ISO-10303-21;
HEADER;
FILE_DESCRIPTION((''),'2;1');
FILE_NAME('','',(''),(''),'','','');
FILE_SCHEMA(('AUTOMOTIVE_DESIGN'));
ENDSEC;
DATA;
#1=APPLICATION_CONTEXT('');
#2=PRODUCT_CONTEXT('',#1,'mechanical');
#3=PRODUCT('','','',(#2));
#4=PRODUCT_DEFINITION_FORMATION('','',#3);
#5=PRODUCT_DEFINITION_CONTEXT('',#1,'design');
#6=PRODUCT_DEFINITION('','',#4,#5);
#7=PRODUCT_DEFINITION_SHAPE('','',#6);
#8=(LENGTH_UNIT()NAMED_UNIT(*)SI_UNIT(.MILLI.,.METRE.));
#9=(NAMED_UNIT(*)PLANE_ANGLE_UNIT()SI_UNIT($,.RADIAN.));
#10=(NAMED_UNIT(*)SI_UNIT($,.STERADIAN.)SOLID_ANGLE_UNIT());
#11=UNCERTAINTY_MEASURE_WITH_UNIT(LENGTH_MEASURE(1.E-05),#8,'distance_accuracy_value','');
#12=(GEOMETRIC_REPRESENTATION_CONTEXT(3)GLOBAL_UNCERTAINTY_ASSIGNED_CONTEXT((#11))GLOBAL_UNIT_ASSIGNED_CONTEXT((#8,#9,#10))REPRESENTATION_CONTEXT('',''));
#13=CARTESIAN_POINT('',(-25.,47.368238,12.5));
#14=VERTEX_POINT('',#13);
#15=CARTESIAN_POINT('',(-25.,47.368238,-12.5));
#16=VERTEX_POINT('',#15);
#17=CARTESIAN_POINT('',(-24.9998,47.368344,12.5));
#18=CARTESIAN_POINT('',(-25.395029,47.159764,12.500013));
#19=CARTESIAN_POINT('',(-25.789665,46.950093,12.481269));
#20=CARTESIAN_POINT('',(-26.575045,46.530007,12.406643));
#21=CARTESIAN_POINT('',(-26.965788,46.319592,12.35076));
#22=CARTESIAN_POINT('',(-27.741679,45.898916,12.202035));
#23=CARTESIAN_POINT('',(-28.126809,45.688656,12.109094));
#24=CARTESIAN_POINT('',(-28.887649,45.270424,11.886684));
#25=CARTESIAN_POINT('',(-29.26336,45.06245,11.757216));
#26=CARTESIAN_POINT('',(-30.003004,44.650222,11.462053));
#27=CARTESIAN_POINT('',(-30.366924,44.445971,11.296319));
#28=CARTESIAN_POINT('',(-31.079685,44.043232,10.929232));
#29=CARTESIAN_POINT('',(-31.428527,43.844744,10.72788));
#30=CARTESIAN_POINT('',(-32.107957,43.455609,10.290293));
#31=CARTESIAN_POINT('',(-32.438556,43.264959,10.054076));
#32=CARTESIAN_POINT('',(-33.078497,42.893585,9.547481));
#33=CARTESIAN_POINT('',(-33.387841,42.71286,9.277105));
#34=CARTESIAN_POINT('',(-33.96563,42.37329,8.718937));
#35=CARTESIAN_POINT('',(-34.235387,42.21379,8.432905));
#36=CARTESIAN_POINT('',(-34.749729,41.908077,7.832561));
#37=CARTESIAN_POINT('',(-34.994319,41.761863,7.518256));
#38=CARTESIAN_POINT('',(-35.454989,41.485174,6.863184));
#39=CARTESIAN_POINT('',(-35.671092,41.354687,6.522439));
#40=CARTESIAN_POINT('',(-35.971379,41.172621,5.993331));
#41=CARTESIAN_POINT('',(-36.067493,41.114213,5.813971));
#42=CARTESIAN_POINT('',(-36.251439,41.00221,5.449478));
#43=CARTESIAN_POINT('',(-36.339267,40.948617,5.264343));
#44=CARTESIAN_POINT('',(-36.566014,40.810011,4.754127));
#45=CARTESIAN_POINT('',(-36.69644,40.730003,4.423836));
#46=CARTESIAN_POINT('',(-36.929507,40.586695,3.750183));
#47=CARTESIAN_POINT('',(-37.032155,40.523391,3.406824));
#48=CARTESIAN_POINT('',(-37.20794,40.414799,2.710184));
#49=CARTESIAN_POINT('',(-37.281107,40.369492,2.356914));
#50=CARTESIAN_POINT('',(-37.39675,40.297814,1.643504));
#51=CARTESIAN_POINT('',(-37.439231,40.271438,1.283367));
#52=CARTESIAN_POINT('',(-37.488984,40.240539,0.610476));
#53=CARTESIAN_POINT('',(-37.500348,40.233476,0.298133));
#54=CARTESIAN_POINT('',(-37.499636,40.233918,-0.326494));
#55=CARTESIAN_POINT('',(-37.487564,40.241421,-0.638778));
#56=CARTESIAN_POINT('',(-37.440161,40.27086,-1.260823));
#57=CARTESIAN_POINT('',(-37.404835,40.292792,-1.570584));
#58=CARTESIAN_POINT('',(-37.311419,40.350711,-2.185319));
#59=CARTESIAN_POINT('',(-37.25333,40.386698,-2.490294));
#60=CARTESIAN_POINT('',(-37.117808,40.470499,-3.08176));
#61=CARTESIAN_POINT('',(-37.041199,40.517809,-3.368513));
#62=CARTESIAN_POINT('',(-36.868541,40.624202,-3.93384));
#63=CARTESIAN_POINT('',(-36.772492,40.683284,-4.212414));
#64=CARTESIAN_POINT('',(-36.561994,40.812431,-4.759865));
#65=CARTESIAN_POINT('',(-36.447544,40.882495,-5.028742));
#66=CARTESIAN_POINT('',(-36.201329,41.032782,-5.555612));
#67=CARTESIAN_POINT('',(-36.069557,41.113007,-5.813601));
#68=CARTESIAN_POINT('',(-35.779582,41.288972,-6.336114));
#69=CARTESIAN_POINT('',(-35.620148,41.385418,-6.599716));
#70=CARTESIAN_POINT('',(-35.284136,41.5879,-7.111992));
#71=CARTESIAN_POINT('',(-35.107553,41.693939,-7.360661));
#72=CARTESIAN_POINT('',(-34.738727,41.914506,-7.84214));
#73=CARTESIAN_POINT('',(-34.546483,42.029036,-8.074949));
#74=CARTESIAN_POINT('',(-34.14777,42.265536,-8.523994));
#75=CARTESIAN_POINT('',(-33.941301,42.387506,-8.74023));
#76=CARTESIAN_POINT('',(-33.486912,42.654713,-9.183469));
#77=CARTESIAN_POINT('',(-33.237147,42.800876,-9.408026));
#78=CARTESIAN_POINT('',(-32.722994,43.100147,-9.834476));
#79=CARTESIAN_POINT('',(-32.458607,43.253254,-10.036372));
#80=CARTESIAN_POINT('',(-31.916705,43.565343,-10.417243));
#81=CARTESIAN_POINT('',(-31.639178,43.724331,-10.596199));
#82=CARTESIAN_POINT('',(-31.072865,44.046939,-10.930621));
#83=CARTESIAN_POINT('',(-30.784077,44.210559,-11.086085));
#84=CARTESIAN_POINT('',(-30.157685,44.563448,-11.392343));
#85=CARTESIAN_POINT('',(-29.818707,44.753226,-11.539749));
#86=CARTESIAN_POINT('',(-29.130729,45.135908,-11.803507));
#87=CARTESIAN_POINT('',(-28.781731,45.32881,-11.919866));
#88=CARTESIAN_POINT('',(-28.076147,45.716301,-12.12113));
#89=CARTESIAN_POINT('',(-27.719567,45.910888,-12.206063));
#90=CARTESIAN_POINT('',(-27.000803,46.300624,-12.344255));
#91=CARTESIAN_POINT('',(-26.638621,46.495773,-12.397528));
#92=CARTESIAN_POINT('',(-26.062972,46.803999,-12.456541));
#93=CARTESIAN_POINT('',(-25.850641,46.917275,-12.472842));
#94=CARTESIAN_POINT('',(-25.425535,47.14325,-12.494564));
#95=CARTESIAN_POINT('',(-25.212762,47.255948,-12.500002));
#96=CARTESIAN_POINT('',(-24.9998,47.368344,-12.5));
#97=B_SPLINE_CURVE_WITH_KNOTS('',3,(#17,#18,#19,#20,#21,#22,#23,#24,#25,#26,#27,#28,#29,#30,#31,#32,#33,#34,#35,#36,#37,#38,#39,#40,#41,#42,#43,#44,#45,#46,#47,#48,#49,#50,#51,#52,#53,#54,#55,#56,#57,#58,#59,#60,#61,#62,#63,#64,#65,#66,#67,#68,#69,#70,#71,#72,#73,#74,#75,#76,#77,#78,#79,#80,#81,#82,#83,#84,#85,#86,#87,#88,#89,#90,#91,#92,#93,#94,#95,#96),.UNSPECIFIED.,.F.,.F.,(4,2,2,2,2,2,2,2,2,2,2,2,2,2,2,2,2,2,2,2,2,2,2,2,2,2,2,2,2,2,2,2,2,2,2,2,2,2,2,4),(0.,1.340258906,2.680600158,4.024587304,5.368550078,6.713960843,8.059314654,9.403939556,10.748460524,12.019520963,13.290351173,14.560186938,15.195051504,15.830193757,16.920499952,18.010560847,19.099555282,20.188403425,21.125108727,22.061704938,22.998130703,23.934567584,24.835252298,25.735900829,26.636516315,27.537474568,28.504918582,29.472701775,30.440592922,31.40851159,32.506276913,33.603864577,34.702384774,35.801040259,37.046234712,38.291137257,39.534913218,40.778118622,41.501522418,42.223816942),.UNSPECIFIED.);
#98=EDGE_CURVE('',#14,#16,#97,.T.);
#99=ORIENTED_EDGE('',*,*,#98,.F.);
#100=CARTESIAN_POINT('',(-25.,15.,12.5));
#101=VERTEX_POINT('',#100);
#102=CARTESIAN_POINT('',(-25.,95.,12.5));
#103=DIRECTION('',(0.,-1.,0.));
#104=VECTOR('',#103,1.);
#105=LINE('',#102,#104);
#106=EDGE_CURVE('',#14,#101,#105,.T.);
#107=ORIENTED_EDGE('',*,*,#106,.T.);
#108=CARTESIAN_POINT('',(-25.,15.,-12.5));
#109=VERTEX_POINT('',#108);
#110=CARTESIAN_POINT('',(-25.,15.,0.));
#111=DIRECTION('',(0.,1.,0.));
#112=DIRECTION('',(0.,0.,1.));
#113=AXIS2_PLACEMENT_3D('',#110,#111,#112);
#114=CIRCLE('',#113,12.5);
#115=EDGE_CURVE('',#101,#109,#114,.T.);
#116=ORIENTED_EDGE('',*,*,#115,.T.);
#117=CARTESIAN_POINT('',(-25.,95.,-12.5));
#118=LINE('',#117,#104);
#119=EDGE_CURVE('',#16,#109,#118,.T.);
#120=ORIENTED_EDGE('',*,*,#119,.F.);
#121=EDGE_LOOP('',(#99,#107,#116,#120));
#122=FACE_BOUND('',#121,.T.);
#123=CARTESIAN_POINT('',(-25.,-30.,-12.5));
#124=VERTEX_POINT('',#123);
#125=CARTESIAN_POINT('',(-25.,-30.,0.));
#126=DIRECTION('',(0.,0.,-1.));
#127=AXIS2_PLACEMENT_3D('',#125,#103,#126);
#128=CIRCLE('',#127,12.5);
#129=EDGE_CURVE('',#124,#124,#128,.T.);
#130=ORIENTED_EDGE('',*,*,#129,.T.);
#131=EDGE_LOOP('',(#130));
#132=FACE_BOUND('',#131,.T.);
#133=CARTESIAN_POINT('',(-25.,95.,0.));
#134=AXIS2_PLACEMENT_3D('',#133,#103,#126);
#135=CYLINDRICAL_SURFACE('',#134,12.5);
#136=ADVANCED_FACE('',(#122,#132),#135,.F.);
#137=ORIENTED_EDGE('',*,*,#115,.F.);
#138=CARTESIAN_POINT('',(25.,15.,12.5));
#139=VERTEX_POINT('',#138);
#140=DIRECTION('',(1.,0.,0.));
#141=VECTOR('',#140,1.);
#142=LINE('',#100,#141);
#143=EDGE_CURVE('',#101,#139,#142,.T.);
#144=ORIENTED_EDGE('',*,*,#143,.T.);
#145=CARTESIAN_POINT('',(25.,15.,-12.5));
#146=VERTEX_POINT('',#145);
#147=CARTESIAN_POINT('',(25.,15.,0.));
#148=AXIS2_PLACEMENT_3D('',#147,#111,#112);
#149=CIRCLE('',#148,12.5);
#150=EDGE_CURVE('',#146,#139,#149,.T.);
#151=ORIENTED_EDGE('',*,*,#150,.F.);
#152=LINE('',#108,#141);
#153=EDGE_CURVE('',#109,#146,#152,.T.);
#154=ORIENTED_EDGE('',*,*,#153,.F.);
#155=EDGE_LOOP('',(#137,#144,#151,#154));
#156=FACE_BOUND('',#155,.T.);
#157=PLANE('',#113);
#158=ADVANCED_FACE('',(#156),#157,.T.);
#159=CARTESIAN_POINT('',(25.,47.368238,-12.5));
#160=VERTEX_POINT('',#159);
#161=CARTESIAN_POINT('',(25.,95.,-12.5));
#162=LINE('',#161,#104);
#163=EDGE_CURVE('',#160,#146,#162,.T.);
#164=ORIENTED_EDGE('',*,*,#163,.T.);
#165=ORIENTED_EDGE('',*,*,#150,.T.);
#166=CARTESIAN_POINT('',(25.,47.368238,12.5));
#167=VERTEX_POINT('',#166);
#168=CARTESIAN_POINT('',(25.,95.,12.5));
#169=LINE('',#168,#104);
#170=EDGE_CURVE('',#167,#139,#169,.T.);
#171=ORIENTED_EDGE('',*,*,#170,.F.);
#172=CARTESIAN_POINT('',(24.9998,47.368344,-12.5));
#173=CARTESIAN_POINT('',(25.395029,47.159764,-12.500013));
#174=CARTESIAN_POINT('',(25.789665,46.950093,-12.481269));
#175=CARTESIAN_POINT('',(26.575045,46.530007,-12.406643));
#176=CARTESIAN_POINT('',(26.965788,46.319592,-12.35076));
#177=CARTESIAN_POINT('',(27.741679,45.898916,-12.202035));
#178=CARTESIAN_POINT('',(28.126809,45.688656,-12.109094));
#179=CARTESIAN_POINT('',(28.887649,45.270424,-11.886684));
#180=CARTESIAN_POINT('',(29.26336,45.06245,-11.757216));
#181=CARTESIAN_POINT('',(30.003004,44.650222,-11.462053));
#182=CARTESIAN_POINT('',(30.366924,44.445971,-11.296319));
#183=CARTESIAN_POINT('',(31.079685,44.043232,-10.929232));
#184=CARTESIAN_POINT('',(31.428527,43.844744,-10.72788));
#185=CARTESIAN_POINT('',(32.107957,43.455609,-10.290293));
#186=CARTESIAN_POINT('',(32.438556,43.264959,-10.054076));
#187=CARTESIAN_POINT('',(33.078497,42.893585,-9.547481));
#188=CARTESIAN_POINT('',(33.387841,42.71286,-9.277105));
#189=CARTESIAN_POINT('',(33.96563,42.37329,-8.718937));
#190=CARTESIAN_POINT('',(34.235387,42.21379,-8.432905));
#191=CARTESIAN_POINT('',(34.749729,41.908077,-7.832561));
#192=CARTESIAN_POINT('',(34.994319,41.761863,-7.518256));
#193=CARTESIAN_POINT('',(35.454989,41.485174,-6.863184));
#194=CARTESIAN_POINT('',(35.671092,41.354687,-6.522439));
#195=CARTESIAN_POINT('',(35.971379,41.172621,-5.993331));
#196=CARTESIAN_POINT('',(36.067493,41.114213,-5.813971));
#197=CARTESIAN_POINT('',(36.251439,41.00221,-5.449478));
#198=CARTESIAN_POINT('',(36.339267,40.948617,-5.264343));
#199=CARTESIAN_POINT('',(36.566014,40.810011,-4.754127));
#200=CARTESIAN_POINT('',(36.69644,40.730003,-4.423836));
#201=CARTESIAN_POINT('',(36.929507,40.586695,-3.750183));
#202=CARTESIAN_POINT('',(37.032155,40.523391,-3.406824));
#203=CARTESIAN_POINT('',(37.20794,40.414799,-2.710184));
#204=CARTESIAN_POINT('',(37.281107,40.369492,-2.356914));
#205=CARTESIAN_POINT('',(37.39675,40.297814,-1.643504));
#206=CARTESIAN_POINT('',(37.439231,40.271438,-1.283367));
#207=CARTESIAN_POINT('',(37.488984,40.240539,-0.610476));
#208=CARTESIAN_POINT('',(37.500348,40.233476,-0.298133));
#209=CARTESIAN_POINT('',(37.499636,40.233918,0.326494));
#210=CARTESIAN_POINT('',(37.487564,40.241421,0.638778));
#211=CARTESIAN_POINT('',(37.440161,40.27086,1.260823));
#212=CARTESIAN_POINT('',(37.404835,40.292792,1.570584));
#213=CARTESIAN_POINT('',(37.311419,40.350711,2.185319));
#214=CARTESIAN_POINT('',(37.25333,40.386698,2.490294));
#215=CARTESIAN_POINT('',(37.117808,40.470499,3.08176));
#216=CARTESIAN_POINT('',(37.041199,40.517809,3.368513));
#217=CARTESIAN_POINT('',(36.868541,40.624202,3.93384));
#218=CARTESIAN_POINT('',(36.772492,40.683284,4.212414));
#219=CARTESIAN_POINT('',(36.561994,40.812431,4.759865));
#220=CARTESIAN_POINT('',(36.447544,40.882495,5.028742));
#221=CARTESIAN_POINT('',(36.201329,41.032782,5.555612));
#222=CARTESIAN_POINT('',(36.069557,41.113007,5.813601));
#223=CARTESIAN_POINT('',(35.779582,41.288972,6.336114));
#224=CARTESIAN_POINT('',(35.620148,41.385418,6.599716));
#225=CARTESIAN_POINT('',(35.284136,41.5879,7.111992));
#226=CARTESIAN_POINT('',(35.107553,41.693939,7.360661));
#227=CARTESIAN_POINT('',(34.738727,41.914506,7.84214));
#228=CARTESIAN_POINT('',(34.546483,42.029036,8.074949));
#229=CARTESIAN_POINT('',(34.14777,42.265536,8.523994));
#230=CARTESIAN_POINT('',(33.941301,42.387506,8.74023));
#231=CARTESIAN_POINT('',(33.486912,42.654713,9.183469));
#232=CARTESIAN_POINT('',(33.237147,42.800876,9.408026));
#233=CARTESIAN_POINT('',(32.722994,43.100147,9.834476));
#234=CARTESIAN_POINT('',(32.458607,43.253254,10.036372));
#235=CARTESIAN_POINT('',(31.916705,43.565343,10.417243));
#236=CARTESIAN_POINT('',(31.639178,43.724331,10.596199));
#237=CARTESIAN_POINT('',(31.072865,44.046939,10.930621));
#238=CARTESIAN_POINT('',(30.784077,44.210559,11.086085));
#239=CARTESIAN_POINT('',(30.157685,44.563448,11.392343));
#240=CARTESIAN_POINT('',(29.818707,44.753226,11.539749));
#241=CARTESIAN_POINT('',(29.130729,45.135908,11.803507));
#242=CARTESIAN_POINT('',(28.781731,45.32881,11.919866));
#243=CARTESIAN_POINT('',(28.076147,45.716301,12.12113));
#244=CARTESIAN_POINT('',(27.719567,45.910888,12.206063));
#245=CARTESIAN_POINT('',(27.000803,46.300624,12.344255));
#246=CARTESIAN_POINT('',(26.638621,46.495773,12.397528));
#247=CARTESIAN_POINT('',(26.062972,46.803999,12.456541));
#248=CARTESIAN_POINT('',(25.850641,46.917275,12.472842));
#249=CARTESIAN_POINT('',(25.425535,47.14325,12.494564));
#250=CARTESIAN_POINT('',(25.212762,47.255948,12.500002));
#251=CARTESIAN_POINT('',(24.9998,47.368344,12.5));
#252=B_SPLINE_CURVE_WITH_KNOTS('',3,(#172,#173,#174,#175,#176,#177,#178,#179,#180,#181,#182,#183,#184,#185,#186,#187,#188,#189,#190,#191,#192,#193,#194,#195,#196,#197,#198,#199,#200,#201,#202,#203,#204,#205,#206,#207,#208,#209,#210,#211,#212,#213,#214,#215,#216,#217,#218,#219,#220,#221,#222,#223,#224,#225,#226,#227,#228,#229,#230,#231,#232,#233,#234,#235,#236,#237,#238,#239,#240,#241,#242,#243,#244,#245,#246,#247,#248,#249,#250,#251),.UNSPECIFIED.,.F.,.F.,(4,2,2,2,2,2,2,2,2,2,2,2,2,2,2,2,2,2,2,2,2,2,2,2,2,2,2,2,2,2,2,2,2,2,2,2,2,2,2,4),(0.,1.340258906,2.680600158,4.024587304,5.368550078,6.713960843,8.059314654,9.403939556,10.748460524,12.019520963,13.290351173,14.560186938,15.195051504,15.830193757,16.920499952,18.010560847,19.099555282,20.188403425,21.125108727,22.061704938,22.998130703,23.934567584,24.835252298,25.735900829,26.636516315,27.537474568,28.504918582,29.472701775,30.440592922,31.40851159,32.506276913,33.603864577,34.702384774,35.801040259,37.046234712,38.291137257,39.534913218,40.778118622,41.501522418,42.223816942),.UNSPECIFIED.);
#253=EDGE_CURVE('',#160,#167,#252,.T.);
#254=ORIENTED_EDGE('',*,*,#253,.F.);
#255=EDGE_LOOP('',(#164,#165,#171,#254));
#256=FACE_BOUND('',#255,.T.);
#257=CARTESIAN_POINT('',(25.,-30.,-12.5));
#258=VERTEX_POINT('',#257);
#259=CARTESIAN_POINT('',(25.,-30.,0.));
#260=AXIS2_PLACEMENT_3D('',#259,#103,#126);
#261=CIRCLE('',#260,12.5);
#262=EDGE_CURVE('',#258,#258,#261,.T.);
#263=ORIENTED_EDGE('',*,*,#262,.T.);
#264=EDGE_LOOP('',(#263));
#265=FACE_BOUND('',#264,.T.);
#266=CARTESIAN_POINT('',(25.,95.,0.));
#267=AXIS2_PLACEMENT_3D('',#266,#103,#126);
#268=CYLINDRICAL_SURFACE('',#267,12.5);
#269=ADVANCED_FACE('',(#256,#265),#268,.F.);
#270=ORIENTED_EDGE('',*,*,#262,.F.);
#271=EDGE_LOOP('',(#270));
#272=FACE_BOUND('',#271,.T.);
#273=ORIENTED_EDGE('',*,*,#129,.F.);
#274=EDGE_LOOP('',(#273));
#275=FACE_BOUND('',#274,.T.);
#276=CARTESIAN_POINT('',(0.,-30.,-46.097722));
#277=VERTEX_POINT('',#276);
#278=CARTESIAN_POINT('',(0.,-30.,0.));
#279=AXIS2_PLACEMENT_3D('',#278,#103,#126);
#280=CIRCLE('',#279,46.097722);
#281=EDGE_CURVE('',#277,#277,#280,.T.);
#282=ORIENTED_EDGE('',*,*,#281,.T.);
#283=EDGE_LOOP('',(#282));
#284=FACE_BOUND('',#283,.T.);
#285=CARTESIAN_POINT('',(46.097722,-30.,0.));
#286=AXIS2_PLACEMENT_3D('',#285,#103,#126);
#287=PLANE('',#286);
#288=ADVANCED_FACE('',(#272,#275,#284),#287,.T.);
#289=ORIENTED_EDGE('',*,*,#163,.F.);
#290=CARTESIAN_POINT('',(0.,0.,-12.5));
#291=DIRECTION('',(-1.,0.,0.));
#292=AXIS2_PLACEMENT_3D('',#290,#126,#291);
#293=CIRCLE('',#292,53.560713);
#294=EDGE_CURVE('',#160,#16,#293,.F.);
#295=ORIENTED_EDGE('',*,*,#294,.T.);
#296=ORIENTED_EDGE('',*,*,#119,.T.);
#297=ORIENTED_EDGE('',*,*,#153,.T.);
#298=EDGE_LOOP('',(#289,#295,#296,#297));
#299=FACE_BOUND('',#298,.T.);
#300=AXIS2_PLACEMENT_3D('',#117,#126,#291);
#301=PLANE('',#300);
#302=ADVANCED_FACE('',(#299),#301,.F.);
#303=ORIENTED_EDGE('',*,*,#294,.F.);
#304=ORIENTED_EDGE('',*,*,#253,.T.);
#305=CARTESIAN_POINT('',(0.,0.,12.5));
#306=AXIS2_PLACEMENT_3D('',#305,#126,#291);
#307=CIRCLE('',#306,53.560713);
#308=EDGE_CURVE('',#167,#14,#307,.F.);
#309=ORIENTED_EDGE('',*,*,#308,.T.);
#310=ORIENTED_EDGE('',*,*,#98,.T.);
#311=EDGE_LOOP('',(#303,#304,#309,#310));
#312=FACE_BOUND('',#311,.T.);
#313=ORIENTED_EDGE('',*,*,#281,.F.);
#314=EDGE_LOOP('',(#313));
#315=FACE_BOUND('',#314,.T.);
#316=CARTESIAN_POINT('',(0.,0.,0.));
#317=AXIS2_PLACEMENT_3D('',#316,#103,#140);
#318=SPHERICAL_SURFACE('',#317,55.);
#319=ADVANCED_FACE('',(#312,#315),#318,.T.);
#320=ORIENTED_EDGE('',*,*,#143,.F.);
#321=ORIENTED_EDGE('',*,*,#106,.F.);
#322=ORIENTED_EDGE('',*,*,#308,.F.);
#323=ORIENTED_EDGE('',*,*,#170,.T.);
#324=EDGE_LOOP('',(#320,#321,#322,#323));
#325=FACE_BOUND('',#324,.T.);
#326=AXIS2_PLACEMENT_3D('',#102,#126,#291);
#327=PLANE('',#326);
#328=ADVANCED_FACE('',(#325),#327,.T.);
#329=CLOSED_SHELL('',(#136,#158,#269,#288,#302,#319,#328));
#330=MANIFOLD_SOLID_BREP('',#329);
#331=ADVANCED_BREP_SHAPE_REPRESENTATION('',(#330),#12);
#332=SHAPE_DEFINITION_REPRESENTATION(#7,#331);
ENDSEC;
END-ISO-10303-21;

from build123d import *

# Parameters (mm, degrees)
CUT_EXTRUDE4_START = 15
CUT_EXTRUDE4_DEPTH = 80
CUT_EXTRUDE6_START = -65
SKETCH6_R          = 12.5
CUT_EXTRUDE6_DEPTH = 80


with BuildPart() as part:
    # Sketch1 → Revolve1 (revolve)
    with BuildSketch(Plane.XY):
        with BuildLine():
            Line((46.097722286, -30), (0, -30))
            Line((0, -30), (0, 55))
            ThreePointArc((0, 55), (48.347699015, 26.220221204), (46.097722286, -30))
        make_face()
    revolve(axis=Axis((0, 4.730452026, 0), (0, 1, 0)))

    # Sketch3 → Cut-Extrude4 (cut)
    with BuildSketch(Plane(origin=(0, 0, 0), x_dir=(1, 0, 0), z_dir=(0, 1, 0)).offset(CUT_EXTRUDE4_START)):
        with BuildLine():
            Line((-25, 12.5), (25, 12.5))
            ThreePointArc((25, 12.5), (37.5, 0), (25, -12.5))
            Line((25, -12.5), (-25, -12.5))
            ThreePointArc((-25, -12.5), (-37.5, 0), (-25, 12.5))
        make_face()
    extrude(amount=CUT_EXTRUDE4_DEPTH, mode=Mode.SUBTRACT)

    # Sketch6 → Cut-Extrude6 (cut)
    with BuildSketch(Plane(origin=(0, 0, 0), x_dir=(1, 0, 0), z_dir=(0, 1, 0)).offset(CUT_EXTRUDE6_START)):
        with Locations((-25, 0)):
            Circle(SKETCH6_R)
        with Locations((25, 0)):
            Circle(SKETCH6_R)
    extrude(amount=CUT_EXTRUDE6_DEPTH, mode=Mode.SUBTRACT)


solid = part.part
